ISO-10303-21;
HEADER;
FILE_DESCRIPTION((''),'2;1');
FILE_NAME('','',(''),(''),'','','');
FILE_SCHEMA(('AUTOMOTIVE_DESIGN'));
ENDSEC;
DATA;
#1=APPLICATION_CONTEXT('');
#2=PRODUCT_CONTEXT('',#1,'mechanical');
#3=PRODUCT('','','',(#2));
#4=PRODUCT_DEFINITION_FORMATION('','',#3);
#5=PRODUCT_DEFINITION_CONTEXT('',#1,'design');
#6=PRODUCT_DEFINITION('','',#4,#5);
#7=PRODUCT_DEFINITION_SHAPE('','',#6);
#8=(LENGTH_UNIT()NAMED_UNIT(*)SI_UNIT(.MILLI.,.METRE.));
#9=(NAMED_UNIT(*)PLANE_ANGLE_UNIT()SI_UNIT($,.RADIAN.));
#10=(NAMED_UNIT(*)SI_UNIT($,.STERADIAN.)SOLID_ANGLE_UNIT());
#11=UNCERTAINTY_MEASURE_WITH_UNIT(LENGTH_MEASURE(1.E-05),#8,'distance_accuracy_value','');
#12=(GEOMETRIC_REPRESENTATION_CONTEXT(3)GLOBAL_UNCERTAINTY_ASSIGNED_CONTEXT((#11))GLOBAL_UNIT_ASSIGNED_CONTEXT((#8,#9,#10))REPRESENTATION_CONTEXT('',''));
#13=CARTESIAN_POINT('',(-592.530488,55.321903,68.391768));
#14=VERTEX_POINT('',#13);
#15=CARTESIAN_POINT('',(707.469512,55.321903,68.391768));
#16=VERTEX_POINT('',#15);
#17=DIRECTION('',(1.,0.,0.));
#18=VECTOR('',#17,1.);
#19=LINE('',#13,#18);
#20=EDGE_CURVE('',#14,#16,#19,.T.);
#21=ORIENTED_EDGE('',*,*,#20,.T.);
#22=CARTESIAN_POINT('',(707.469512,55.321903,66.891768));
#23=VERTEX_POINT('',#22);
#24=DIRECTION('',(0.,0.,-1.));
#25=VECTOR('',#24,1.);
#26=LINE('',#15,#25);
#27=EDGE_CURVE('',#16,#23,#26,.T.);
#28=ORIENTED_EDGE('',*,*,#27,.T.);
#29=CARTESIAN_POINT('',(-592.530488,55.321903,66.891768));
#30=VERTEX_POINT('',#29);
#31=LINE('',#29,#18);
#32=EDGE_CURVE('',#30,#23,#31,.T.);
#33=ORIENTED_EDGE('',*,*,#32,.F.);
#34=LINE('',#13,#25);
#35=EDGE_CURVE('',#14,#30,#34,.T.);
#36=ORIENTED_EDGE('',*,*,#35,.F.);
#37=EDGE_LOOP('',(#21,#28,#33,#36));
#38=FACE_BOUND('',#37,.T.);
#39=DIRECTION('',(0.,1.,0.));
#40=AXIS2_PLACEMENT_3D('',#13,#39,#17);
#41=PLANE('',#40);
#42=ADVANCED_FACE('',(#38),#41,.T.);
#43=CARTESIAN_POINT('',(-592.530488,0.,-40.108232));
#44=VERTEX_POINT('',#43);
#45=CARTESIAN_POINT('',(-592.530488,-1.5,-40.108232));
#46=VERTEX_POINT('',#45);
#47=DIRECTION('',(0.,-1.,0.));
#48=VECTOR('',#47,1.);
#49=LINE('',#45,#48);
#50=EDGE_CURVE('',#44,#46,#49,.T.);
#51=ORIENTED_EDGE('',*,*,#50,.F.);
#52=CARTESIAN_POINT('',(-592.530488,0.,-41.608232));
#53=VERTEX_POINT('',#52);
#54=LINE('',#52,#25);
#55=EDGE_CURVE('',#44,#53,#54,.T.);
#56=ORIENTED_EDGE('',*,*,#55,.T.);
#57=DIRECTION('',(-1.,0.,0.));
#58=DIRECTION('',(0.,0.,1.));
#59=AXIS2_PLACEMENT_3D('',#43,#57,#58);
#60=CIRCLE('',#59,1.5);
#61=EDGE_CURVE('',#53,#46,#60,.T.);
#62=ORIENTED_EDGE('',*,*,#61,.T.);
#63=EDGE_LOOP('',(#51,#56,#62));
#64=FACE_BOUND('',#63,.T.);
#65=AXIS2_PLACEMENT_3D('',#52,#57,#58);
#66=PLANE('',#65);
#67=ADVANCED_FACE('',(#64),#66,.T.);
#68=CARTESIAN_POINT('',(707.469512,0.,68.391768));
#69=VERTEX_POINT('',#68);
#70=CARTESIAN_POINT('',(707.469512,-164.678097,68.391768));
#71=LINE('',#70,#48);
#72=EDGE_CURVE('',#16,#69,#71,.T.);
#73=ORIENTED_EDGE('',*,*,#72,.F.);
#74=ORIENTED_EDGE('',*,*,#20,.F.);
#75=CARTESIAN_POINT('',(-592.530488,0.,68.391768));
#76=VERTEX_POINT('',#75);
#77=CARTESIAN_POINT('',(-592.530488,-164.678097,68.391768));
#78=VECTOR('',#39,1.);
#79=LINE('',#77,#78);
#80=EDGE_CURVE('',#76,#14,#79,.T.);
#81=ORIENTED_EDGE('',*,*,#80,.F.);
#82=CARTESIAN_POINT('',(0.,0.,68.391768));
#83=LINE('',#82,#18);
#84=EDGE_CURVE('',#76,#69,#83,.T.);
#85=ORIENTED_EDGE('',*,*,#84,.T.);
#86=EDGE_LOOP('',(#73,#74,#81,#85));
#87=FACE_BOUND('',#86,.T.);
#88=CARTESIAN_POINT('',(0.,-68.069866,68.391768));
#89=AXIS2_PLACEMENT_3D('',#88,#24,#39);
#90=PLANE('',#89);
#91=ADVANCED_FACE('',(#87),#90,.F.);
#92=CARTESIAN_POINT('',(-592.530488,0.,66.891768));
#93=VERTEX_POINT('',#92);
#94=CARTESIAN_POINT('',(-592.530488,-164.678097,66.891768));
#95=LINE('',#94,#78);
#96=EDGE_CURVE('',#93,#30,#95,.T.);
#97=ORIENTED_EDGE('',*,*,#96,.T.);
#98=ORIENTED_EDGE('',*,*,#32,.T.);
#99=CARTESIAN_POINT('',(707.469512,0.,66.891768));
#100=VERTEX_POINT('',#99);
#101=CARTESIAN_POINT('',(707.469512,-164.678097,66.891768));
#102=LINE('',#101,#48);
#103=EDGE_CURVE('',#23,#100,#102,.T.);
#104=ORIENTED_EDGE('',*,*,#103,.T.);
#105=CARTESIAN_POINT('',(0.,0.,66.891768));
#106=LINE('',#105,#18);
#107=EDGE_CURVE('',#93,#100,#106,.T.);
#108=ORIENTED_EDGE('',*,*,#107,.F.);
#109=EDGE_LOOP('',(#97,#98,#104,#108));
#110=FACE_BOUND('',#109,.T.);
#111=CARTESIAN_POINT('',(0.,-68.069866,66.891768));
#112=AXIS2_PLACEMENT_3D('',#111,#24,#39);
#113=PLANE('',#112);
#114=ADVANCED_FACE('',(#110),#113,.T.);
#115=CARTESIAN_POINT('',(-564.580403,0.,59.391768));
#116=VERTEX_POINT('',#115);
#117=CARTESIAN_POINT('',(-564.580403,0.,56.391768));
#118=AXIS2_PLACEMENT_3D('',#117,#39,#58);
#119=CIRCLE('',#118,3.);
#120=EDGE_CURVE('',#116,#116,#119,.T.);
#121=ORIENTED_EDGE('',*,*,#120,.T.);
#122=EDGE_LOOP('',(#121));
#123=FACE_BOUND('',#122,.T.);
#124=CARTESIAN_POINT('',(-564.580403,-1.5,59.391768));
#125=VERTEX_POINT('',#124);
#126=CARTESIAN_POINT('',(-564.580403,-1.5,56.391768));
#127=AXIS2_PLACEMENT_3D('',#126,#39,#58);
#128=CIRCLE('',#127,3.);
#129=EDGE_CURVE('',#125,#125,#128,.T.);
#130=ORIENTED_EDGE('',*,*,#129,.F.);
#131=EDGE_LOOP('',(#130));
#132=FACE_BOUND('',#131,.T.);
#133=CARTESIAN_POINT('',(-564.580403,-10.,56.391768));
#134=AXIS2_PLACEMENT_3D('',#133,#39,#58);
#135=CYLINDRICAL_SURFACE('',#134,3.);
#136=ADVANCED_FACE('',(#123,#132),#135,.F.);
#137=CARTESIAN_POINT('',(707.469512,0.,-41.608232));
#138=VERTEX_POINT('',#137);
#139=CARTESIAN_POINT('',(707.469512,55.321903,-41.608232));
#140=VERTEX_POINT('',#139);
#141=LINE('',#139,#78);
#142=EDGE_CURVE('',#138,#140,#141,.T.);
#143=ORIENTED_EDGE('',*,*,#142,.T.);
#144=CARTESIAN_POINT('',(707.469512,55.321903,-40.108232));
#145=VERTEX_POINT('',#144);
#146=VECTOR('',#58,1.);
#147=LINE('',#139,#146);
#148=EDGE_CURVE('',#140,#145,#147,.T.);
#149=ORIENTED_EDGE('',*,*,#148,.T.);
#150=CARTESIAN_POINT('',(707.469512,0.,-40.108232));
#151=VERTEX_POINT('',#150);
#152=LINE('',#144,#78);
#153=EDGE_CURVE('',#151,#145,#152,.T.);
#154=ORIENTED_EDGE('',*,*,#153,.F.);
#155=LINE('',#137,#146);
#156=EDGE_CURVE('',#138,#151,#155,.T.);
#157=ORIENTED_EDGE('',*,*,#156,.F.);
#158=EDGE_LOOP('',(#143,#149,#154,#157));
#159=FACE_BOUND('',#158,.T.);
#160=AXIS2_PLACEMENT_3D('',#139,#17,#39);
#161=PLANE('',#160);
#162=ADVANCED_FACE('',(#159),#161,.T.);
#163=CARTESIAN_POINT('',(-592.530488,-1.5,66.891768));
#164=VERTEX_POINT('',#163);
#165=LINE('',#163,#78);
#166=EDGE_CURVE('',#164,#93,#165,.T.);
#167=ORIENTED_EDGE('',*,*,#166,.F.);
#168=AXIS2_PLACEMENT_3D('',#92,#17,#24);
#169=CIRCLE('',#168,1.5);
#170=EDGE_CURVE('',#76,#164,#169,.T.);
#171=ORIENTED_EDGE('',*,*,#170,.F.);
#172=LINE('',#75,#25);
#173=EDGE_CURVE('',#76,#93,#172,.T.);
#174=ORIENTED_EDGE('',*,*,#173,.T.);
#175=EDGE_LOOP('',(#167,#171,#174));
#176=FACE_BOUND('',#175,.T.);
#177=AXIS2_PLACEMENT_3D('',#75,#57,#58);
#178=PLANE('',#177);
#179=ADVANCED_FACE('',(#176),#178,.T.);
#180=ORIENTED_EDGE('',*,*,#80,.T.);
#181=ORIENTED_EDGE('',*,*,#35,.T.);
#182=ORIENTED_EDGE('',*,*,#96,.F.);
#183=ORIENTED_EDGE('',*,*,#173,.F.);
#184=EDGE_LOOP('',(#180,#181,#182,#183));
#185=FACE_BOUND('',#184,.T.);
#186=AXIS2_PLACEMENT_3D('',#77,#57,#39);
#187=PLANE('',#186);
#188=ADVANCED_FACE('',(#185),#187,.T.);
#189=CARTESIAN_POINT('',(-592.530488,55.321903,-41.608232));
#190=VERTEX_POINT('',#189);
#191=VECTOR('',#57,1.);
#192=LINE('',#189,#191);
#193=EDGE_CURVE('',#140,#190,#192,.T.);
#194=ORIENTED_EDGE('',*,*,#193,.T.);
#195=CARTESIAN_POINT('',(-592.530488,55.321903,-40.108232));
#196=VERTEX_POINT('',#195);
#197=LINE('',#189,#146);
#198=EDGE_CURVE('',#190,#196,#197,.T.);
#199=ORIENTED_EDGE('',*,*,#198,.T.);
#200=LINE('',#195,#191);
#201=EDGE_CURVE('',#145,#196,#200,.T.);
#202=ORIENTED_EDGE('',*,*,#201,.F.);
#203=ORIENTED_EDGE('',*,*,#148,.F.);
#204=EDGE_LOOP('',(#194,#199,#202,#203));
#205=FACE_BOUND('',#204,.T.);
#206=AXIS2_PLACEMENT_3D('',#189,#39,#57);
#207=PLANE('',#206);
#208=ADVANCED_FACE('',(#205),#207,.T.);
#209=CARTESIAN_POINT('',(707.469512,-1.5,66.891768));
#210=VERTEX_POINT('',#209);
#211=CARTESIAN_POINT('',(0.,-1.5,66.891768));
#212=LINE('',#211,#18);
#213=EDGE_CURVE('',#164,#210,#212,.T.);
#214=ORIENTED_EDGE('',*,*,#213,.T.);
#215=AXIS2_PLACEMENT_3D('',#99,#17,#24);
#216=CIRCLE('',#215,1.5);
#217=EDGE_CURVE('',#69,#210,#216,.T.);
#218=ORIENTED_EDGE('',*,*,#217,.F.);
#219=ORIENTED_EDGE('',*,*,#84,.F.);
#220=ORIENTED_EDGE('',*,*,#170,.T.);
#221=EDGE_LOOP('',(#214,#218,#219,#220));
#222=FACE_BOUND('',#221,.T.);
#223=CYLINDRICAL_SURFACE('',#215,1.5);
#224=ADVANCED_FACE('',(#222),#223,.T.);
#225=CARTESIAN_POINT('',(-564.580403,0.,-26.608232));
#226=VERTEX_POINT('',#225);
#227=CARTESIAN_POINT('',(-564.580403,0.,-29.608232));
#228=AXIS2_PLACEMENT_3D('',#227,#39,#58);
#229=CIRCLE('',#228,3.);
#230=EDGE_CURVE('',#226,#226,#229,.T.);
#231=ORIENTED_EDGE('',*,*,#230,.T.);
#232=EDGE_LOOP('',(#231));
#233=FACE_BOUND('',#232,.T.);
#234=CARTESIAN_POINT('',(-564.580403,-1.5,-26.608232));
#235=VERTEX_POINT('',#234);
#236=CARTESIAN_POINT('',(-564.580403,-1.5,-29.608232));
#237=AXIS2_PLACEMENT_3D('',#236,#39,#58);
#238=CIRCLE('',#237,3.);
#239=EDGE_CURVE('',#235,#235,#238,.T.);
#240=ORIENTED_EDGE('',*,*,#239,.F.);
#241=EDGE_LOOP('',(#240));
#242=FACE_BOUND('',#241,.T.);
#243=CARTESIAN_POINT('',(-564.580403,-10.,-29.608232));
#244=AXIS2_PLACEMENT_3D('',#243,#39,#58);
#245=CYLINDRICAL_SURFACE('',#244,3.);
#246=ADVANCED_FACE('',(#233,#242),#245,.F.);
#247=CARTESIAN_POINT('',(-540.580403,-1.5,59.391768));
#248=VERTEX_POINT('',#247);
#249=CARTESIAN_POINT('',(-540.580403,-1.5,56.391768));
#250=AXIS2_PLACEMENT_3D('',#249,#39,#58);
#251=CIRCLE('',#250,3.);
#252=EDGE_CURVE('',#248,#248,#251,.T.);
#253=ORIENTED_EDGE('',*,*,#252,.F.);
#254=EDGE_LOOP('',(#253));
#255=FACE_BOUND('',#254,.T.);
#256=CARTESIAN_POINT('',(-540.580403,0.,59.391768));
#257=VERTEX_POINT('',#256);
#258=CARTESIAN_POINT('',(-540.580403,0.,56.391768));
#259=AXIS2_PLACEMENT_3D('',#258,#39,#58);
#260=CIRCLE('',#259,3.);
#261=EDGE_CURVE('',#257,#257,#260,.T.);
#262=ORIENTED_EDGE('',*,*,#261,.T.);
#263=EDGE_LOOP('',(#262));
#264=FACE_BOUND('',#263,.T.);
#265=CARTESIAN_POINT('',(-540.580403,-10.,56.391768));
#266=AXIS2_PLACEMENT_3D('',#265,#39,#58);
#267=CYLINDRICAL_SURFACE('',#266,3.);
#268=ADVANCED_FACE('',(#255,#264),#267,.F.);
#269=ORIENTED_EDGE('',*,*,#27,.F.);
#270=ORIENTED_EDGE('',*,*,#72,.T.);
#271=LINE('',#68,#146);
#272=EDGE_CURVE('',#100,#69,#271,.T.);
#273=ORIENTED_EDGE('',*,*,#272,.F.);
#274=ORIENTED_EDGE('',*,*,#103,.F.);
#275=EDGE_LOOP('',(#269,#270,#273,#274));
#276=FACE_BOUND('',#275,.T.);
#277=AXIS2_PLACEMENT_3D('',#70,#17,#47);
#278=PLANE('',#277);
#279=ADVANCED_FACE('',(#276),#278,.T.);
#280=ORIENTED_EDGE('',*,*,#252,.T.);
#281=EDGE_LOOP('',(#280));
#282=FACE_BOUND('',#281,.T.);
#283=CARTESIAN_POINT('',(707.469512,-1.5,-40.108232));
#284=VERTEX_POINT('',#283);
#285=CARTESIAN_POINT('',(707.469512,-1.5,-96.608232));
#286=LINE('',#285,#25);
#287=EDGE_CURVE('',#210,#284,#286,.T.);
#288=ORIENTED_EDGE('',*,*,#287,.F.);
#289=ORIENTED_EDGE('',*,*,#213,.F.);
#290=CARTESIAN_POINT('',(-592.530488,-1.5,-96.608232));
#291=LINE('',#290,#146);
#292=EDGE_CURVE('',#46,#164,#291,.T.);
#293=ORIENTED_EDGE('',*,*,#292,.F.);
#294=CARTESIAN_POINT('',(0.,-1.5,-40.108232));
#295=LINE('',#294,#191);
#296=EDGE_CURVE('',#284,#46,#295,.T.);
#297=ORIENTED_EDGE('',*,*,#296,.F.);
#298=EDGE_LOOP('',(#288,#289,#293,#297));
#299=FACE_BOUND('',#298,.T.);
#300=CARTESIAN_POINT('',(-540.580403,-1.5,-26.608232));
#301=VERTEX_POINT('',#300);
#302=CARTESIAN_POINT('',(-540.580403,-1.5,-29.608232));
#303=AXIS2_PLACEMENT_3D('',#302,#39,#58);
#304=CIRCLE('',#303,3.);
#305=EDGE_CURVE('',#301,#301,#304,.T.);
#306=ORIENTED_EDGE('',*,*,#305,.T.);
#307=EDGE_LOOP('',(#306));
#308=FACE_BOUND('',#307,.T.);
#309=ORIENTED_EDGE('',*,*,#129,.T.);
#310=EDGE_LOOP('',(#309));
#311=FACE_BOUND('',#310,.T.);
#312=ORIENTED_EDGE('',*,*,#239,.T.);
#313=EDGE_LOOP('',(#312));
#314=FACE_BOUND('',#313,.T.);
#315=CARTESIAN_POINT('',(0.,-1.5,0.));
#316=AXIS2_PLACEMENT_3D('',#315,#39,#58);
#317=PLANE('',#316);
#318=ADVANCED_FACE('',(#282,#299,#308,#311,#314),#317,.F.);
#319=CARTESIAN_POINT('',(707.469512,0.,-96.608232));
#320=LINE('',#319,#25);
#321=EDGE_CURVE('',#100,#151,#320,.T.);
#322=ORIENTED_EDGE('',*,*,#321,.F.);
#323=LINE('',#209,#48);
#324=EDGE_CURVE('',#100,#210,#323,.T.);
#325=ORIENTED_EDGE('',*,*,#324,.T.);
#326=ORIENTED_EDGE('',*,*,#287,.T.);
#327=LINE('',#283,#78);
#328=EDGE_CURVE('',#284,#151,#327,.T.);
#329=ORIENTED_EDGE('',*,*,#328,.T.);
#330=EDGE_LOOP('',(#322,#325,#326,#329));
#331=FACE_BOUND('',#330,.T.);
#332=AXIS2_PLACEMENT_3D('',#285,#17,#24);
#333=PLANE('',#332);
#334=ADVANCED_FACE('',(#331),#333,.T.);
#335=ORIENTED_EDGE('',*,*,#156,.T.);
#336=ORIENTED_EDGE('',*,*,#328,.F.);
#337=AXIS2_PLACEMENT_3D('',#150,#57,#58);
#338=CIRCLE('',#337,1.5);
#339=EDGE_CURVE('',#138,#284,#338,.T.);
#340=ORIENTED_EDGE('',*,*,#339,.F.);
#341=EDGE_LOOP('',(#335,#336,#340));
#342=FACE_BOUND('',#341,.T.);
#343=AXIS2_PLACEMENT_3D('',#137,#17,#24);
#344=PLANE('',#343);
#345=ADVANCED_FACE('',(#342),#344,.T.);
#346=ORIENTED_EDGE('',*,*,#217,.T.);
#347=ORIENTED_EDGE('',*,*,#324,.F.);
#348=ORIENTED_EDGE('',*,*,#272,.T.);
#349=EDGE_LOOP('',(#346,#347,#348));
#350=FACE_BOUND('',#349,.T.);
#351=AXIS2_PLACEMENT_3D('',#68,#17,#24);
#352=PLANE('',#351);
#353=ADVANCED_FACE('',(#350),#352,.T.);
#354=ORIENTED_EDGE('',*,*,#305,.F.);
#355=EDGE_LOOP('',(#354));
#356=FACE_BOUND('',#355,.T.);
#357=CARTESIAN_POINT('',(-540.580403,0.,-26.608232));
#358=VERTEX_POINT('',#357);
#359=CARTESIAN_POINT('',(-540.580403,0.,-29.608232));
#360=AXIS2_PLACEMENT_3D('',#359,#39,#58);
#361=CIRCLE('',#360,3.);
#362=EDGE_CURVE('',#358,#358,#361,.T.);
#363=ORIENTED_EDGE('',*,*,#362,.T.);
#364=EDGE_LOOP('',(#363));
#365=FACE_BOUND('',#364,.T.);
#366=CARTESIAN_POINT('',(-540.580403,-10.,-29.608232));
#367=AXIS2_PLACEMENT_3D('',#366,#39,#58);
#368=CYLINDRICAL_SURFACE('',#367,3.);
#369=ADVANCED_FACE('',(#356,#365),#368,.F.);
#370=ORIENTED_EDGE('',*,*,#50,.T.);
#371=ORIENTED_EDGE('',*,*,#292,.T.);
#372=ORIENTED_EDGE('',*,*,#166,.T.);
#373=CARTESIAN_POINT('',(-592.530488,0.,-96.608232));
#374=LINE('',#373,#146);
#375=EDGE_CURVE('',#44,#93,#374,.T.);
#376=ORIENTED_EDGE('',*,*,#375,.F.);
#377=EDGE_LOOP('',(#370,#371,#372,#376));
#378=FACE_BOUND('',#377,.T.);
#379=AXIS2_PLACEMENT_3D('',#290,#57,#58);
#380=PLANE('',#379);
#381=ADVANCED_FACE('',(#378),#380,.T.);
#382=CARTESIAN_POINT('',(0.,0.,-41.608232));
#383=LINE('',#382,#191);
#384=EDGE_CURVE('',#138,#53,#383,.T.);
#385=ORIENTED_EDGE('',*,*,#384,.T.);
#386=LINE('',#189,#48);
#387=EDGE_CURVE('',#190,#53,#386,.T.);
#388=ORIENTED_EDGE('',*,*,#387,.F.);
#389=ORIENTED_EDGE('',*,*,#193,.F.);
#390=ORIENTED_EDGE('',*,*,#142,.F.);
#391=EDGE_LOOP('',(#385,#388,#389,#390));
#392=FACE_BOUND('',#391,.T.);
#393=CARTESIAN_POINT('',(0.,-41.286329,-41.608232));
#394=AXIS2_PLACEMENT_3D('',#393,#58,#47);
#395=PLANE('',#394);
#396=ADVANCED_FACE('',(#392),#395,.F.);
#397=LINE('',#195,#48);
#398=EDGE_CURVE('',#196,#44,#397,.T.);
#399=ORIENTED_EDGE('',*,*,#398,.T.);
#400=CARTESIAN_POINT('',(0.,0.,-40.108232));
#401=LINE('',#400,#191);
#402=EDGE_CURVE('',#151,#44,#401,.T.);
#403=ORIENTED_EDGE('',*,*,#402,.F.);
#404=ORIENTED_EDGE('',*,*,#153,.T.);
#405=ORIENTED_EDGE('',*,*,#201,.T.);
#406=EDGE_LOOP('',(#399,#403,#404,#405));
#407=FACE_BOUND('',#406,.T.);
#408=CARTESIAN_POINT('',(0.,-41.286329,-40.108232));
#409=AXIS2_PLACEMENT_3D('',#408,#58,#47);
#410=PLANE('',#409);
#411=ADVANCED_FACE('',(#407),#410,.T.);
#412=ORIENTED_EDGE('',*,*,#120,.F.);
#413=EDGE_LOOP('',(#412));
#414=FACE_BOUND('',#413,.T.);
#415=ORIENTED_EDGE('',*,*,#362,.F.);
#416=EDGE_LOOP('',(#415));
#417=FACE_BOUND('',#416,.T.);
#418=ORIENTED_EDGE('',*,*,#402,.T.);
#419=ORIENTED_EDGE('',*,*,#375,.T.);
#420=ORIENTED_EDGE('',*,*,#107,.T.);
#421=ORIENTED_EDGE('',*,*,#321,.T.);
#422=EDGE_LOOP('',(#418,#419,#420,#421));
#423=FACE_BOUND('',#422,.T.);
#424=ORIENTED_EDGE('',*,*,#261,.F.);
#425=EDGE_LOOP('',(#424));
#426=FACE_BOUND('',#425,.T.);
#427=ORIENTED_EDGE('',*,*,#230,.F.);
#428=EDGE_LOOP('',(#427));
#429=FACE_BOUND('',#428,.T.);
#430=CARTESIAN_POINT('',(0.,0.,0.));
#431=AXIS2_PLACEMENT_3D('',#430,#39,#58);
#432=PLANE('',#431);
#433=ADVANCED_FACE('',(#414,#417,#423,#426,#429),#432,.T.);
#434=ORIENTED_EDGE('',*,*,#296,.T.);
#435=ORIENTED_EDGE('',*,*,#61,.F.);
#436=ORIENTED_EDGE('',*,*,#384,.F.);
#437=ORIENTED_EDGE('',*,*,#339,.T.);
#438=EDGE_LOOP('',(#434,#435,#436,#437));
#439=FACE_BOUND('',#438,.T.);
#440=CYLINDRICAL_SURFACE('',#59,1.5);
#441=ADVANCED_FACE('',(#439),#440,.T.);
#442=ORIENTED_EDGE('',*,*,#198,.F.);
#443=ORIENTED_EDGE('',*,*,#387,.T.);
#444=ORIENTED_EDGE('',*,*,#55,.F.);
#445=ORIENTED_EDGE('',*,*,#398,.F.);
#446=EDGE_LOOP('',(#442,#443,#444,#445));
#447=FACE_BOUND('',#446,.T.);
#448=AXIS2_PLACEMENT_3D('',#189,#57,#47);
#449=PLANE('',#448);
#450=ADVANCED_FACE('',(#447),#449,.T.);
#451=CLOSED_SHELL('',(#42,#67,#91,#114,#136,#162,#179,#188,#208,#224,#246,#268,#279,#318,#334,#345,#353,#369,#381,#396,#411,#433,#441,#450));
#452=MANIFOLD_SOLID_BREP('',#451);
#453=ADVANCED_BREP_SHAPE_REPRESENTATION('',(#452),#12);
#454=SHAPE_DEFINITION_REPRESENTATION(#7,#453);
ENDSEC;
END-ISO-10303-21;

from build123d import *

# Parameters (mm, degrees)
CROQUIS1_W                      = 1300
CROQUIS1_H                      = 220
BRIDA_BASE1_DEPTH               = 1.5
PLIEGUE_START                   = -592.530487805
PLIEGUE_CROQUIZADO1_DEPTH       = 1300
PLIEGUE_CROQUIZADO1_2_OUTLINE_W = 55.321902755
PLIEGUE_CROQUIZADO1_2_OUTLINE_H = 1.5
PLIEGUE_CROQUIZADO1_2_DEPTH     = 1300
CROQUIS8_R                      = 3
CORTAR_EXTRUIR1_DEPTH           = 10


# Read off the part's stored shape, not the designer's step: Pliegue croquizado1
# Sheet-metal steps are written as plain solids
with BuildPart() as part:
    # Croquis1 → Brida base1 (new body)
    with BuildSketch(Plane(origin=(0, 0, 0), x_dir=(1, 0, 0), z_dir=(0, 1, 0))):
        with Locations((57.469512195, -13.391768293)):
            Rectangle(CROQUIS1_W, CROQUIS1_H)
    extrude(amount=-BRIDA_BASE1_DEPTH)

    # Pliegue croquizado1 outline → Pliegue croquizado1 (cut)
    with BuildSketch(Plane.YZ.offset(PLIEGUE_START)):
        with BuildLine():
            Line((0, -96.608231707), (0, -41.608231707))
            ThreePointArc((0, -41.608231707), (-1.060660172, -41.168891879), (-1.5, -40.108231707))
            Line((-1.5, -40.108231707), (-1.5, -96.608231707))
            Line((-1.5, -96.608231707), (0, -96.608231707))
        make_face()
        with BuildLine():
            Line((-1.5, 123.391768293), (-1.5, 66.891768293))
            ThreePointArc((-1.5, 66.891768293), (-1.060660171, 67.952428465), (0, 68.391768293))
            Line((0, 68.391768293), (0, 123.391768293))
            Line((0, 123.391768293), (-1.5, 123.391768293))
        make_face()
    extrude(amount=PLIEGUE_CROQUIZADO1_DEPTH, mode=Mode.SUBTRACT)

    # Pliegue croquizado1 2 outline → Pliegue croquizado1 2 (add)
    with BuildSketch(Plane.YZ.offset(PLIEGUE_START)):
        with Locations((27.660951378, -40.858231707)):
            Rectangle(PLIEGUE_CROQUIZADO1_2_OUTLINE_W, PLIEGUE_CROQUIZADO1_2_OUTLINE_H)
        with Locations((27.660951378, 67.641768293)):
            Rectangle(PLIEGUE_CROQUIZADO1_2_OUTLINE_W, PLIEGUE_CROQUIZADO1_2_OUTLINE_H)
    extrude(amount=PLIEGUE_CROQUIZADO1_2_DEPTH)

    # Croquis8 → Cortar-Extruir1 (cut)
    with BuildSketch(Plane(origin=(0, 0, 0), x_dir=(1, 0, 0), z_dir=(0, 1, 0))):
        with Locations(Location((-564.580402517, -56.391768293, 0), (0, 0, 270))):
            Circle(CROQUIS8_R)
        with Locations(Location((-540.580402517, -56.391768293, 0), (0, 0, 270))):
            Circle(CROQUIS8_R)
        with Locations(Location((-540.580402517, 29.608231707, 0), (0, 0, 270))):
            Circle(CROQUIS8_R)
        with Locations(Location((-564.580402517, 29.608231707, 0), (0, 0, 270))):
            Circle(CROQUIS8_R)
    extrude(amount=-CORTAR_EXTRUIR1_DEPTH, mode=Mode.SUBTRACT)


solid = part.part
